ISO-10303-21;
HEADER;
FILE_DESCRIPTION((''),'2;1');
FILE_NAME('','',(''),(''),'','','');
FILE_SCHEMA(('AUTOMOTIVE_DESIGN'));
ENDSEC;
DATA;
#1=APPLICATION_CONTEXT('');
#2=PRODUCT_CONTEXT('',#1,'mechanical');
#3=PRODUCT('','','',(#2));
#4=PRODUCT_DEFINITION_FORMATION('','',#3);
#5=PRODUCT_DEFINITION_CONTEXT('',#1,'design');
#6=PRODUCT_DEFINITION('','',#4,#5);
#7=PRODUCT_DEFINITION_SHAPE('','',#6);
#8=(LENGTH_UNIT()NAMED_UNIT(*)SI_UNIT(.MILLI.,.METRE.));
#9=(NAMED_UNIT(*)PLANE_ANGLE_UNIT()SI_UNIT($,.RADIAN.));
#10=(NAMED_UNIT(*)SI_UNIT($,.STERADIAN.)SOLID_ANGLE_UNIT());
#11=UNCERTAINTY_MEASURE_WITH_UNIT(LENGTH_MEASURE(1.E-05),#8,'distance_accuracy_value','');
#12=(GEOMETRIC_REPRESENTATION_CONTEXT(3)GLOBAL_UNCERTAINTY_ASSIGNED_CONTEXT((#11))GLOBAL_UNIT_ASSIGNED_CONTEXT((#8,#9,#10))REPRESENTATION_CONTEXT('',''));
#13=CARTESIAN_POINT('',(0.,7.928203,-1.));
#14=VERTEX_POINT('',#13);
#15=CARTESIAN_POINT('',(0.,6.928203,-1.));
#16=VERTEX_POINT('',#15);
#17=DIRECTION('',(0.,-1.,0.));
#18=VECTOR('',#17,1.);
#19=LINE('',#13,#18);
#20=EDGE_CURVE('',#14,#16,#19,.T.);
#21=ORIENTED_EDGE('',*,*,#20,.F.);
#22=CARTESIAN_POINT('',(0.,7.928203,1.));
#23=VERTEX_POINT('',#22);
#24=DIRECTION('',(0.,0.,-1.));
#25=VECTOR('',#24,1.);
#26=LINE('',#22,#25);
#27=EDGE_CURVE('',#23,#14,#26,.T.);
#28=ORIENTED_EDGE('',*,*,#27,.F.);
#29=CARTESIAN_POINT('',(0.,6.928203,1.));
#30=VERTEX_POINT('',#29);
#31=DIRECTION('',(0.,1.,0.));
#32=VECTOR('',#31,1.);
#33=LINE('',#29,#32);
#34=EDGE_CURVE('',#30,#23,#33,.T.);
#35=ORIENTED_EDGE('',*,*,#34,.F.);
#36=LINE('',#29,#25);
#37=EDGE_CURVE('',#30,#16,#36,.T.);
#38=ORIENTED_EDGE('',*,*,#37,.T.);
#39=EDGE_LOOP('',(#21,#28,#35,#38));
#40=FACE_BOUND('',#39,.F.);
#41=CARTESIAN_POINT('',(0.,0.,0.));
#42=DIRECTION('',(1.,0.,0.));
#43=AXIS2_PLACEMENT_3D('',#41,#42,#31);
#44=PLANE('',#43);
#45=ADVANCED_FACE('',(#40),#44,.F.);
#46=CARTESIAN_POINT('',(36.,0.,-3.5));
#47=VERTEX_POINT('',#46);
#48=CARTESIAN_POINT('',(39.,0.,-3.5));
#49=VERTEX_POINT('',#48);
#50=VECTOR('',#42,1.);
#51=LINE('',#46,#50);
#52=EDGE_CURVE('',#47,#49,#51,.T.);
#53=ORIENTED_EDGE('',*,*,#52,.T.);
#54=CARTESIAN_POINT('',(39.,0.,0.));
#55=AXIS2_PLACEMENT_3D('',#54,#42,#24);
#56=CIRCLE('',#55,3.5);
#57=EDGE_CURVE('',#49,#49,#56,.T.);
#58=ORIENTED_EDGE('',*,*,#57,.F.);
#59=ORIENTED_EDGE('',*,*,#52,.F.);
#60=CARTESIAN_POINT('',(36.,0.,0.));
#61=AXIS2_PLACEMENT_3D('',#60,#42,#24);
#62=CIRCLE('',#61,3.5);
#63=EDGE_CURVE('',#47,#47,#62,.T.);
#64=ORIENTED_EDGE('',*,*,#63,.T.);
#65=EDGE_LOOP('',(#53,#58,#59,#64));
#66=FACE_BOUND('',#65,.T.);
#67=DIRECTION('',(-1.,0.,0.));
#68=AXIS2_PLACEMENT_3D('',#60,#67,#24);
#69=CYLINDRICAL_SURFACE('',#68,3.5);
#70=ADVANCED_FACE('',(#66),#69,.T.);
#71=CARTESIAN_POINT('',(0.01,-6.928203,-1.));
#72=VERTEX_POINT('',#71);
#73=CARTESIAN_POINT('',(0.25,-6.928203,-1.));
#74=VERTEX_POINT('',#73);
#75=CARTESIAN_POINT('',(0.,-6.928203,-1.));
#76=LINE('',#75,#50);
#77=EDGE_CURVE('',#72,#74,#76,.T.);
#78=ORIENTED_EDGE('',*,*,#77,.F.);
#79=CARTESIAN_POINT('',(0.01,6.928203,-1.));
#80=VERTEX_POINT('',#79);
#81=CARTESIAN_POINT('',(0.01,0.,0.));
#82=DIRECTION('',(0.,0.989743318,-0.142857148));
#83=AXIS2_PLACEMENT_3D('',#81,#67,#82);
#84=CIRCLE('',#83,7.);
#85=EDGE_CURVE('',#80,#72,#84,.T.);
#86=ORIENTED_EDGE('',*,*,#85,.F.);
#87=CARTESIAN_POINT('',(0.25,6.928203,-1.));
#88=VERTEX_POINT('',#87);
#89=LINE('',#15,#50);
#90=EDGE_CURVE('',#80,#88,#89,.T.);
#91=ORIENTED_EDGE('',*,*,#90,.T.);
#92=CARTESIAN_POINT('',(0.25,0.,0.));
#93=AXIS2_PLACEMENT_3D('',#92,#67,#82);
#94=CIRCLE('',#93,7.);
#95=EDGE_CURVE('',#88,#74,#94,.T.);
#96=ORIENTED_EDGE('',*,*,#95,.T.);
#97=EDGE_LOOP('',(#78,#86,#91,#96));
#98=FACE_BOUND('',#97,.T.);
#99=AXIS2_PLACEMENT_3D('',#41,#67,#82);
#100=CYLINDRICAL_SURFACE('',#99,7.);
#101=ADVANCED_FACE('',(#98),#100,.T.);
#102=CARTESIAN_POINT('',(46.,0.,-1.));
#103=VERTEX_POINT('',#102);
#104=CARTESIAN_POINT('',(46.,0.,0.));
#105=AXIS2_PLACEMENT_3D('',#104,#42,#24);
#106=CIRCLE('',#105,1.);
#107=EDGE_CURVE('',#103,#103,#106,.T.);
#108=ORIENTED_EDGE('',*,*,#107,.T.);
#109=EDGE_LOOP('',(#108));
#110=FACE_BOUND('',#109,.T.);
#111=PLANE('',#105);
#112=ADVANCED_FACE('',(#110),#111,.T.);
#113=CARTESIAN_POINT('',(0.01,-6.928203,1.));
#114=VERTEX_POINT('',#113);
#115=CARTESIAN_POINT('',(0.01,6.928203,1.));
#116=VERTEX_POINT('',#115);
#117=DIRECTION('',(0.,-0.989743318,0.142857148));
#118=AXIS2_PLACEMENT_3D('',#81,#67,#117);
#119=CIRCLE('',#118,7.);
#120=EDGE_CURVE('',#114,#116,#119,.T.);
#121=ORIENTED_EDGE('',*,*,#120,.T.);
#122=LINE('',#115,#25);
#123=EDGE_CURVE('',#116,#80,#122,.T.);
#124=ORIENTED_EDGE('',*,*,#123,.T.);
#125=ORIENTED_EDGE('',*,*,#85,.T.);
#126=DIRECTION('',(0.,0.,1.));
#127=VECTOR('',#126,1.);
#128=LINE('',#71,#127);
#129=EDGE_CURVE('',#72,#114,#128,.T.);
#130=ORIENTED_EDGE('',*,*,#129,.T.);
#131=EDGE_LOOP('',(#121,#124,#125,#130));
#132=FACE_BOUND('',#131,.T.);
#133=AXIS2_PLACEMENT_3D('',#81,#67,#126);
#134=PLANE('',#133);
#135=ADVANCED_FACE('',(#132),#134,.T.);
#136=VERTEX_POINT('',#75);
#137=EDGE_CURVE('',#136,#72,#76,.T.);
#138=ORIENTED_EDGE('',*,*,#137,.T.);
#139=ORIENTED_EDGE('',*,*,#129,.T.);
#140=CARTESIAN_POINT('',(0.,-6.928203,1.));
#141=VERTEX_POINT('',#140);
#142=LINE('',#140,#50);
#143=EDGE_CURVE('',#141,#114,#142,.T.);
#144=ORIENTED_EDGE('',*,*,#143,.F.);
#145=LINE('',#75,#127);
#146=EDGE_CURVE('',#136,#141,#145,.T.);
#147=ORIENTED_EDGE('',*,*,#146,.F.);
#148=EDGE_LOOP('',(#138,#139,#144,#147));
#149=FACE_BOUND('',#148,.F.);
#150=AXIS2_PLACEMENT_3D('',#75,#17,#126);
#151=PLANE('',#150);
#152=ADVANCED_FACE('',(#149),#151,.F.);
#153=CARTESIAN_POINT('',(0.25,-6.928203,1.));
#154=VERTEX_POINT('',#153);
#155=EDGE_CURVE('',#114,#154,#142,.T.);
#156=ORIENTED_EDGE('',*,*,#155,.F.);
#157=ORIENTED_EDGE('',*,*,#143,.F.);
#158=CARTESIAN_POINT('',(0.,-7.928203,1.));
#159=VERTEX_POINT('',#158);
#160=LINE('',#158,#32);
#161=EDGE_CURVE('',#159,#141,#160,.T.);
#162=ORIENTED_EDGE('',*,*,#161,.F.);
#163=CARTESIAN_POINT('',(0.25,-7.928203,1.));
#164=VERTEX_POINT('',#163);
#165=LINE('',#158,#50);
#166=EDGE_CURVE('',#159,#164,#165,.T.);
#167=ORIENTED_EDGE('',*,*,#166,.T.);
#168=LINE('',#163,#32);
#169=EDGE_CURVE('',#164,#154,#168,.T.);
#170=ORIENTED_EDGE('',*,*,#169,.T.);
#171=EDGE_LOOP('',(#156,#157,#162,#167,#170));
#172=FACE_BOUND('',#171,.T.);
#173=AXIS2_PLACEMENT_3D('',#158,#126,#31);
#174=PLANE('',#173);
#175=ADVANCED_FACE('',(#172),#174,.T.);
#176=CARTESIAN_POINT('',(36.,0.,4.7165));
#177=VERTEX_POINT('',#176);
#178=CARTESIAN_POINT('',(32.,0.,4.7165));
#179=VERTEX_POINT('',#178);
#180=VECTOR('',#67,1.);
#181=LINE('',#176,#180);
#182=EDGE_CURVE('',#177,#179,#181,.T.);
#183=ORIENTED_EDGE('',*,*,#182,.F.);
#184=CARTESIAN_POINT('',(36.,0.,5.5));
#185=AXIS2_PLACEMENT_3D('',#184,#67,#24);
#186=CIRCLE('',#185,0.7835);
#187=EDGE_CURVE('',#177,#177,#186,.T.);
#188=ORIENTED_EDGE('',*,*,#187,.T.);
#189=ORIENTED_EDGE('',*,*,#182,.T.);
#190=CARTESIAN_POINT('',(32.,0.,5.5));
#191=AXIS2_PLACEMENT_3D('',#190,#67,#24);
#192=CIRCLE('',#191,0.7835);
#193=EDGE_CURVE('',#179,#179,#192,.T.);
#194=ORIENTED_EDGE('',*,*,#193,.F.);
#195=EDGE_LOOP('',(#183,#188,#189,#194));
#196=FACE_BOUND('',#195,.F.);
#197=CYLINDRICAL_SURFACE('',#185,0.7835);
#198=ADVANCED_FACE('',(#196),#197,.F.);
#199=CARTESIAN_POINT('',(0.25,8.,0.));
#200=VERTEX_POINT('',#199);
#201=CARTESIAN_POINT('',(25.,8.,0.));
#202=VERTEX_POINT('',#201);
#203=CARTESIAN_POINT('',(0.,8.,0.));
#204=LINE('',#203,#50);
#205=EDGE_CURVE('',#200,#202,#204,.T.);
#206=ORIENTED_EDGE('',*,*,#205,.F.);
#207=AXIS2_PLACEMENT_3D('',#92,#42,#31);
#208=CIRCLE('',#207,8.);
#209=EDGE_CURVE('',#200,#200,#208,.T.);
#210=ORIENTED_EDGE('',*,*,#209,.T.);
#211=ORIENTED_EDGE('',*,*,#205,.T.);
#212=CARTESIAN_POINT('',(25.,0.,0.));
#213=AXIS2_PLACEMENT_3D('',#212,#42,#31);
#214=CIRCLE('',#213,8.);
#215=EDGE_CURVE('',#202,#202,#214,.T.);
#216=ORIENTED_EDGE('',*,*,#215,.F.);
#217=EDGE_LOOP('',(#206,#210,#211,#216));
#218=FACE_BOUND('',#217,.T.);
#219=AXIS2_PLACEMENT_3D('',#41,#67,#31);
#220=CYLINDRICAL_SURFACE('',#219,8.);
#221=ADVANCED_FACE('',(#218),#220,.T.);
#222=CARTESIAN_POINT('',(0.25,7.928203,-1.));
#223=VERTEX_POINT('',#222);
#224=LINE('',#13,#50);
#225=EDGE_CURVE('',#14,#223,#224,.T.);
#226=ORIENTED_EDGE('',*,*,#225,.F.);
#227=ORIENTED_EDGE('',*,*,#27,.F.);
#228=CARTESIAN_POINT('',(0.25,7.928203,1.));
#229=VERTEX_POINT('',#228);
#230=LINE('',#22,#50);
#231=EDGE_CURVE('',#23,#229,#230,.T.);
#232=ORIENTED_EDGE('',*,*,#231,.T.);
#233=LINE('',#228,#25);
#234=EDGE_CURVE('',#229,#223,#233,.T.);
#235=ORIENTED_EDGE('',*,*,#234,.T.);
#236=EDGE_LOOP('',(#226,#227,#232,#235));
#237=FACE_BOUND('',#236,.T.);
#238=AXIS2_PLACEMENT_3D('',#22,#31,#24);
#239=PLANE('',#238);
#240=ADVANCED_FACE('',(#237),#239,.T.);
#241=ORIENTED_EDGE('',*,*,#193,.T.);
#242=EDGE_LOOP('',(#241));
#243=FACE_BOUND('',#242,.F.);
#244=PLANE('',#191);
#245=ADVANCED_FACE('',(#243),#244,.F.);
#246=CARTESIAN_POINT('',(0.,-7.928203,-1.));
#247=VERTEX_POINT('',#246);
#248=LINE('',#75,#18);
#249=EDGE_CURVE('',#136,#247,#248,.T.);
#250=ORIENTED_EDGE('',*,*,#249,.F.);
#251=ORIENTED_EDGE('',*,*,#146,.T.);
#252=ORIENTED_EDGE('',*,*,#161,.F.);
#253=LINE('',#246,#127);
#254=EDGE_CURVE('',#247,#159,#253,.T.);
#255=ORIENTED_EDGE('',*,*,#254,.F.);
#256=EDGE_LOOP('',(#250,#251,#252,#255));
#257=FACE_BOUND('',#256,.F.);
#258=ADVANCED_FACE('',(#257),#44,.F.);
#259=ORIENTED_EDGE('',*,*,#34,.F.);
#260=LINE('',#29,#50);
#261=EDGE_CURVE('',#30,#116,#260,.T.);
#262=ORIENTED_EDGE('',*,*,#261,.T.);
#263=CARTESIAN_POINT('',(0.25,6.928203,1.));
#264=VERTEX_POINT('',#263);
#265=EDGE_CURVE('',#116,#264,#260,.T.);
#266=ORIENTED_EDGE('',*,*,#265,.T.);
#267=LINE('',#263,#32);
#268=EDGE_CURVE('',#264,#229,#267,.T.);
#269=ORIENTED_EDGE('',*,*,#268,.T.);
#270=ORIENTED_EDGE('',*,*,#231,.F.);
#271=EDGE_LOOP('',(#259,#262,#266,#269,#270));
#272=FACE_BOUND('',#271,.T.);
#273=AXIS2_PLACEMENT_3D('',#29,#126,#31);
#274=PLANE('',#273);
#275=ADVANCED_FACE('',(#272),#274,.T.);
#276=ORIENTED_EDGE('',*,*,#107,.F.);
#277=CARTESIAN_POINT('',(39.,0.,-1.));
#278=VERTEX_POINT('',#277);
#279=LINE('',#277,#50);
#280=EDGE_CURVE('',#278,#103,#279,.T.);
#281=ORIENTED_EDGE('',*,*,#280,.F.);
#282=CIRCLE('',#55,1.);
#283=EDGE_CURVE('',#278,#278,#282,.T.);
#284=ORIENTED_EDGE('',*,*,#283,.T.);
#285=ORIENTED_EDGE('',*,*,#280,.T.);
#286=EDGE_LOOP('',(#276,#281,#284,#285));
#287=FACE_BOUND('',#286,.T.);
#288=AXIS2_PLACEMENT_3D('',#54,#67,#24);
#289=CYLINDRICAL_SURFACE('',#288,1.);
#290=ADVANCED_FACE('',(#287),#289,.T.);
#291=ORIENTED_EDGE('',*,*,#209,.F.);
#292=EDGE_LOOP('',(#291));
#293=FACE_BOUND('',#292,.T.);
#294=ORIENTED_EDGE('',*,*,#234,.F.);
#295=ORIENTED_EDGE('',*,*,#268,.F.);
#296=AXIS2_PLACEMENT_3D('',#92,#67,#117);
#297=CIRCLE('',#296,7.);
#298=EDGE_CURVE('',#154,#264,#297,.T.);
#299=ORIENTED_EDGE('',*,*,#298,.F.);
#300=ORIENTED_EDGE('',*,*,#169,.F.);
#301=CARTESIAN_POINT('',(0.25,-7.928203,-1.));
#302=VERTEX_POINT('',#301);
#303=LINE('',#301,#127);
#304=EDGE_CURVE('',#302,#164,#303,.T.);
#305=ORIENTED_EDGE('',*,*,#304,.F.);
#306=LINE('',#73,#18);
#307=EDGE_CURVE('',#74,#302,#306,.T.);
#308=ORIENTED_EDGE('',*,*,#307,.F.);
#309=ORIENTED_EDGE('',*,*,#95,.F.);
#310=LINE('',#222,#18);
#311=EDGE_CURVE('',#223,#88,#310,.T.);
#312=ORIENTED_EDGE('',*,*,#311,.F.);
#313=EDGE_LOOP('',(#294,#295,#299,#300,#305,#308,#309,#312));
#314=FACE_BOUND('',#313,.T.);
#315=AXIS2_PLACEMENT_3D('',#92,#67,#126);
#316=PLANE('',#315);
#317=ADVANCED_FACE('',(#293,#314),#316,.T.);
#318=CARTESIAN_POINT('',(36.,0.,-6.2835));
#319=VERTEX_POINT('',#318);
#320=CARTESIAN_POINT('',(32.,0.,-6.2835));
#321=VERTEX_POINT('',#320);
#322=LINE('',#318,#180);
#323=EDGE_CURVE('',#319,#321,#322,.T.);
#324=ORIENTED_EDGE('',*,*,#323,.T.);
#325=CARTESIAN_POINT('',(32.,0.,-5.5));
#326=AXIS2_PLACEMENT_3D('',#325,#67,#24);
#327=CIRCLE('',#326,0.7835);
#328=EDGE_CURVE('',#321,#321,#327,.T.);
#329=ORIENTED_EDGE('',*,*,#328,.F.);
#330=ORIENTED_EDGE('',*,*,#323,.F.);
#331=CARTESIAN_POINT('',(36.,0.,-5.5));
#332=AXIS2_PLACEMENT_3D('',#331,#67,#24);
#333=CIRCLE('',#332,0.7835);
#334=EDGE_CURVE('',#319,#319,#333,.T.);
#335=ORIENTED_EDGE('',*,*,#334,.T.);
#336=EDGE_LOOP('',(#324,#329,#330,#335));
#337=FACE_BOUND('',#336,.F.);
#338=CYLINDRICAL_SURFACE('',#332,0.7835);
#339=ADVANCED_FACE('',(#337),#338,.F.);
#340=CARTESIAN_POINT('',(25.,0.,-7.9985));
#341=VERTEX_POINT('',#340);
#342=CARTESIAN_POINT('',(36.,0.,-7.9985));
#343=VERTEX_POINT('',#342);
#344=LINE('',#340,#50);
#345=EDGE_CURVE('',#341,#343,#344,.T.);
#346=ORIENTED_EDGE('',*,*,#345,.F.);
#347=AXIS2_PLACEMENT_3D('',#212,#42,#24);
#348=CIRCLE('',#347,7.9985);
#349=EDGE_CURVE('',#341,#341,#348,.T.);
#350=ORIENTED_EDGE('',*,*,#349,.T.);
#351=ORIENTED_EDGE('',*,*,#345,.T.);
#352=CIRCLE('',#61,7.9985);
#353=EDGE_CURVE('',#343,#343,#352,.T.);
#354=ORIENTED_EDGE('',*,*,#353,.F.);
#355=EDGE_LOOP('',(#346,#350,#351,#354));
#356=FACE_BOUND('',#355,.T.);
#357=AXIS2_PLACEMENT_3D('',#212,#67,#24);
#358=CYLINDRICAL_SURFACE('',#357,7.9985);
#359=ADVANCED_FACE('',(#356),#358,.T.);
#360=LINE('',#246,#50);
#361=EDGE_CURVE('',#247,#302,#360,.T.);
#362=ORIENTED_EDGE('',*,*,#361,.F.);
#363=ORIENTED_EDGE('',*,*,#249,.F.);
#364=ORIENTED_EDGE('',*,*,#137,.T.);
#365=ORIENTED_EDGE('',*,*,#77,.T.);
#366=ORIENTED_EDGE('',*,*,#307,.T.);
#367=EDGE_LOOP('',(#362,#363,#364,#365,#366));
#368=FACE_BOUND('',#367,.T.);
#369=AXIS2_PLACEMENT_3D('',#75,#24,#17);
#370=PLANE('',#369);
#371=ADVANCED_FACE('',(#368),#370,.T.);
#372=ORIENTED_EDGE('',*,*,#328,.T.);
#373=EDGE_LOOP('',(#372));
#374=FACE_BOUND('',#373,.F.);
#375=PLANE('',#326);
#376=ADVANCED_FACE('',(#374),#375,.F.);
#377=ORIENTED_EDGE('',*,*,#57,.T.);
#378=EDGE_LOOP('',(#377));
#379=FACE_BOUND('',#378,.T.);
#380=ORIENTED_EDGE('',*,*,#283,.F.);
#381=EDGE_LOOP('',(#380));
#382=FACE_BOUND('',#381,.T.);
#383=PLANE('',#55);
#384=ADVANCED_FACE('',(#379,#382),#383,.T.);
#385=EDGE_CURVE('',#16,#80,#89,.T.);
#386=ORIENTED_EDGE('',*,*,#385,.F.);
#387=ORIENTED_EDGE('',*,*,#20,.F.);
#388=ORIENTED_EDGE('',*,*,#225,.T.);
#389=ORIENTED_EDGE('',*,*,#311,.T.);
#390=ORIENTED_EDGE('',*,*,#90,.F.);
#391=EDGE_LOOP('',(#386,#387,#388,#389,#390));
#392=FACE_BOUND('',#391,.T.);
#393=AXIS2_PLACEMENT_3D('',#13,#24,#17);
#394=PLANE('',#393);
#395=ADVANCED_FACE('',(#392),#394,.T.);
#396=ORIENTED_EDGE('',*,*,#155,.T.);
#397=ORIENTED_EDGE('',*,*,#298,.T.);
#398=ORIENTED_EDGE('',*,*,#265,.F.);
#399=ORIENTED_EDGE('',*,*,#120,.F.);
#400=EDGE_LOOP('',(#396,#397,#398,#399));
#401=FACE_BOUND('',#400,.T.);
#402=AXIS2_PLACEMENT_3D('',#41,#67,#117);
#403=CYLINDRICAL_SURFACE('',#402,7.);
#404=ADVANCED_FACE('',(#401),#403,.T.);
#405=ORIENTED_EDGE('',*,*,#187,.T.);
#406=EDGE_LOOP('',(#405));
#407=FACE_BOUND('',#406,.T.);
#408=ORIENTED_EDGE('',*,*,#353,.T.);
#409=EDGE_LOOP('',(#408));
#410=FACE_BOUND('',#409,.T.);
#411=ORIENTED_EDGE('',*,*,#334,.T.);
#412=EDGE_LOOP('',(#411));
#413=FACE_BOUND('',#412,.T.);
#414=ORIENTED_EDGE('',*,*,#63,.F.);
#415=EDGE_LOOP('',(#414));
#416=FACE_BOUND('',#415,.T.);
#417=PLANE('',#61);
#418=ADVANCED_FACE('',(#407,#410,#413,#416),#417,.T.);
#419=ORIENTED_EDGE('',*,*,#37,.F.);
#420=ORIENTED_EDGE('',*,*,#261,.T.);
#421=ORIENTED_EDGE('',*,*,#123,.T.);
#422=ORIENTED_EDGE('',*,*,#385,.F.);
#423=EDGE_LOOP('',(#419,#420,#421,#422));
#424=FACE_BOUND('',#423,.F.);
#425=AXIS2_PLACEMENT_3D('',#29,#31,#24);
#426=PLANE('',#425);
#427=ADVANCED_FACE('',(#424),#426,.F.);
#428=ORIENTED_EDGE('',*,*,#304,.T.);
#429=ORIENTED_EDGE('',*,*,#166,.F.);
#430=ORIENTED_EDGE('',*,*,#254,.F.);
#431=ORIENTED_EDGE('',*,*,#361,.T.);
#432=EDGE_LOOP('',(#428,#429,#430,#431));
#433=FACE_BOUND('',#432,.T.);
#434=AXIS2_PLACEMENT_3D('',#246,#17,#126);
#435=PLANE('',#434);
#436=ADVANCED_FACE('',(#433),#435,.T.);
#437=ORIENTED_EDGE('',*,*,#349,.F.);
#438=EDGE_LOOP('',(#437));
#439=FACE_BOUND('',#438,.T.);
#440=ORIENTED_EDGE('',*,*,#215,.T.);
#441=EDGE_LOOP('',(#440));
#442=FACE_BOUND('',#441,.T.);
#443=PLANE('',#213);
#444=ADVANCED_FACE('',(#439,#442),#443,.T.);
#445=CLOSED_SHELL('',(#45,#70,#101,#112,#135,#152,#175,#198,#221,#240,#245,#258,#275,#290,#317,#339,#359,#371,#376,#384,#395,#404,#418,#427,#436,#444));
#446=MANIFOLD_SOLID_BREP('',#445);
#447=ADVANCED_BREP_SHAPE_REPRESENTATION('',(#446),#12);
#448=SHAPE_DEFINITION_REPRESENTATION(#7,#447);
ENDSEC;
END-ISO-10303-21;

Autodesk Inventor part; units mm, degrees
ref_plane "YZ Plane" through (0, 0, 0) normal (1, 0, 0) x (0, 1, 0)
ref_plane "XZ Plane" through (0, 0, 0) normal (0, 1, 0) x (-1, 0, 0)
ref_plane "XY Plane" through (0, 0, 0) normal (0, 0, 1) x (1, 0, 0)
sketch "Sketch1" plane through (0, 0, 0) normal (1, 0, 0) x (0, 1, 0)
  circle A0 centre (0, 0) radius 8
  dimension "d0" = 16
sketch "Sketch1 outline for Extrusion1" plane through (0, 0, 0) normal (1, 0, 0) x (0, 1, 0)
  circle A0 centre (0, 0) radius 8
extrude "Extrusion1" add sketch "Sketch1 outline for Extrusion1" along normal blind 25
sketch "Sketch2" plane through (25, 0, 0) normal (1, 0, 0) x (0, 0, -1)
  circle A0 centre (0, 0) radius 8 projected
  circle A1 centre (0, 0) radius 7.9985
  dimension "d20" = 15.997
sketch "Sketch2 outline for Extrusion2" plane through (25, 0, 0) normal (1, 0, 0) x (0, 0, -1)
  circle A0 centre (0, 0) radius 7.9985
extrude "Extrusion2" add sketch "Sketch2 outline for Extrusion2" along normal blind 11
sketch "Sketch3" plane through (36, 0, 0) normal (1, 0, 0) x (0, 0, -1)
  circle A0 centre (0, 0) radius 8 construction
  line L0 (-8, 0) -> (8, 0) construction
  circle A1 centre (0, 0) radius 5.5 construction
  point P0 (-5.5, 0)
  point P1 (5.5, 0)
  dimension "d6" = 11
hole "Hole1" at (36, 0, 5.5) at (36, 0, -5.5) direction (-1, 0, 0) diameter 1.567 depth 4 thread size "M2x0.4" class "6H" standard "ANSI Metric M Profile"
sketch "Sketch4" plane through (36, 0, 0) normal (1, 0, 0) x (0, 0, -1)
  circle A0 centre (-5.5, 0) radius 0.7835 projected
  circle A1 centre (5.5, 0) radius 0.7835 projected
  circle A2 centre (0, 0) radius 3.5
  dimension "d14" = 7
sketch "Sketch4 outline for Extrusion3" plane through (36, 0, 0) normal (1, 0, 0) x (0, 0, -1)
  circle A0 centre (0, 0) radius 3.5
extrude "Extrusion3" add sketch "Sketch4 outline for Extrusion3" along normal blind 3
sketch "Sketch5" plane through (39, 0, 0) normal (1, 0, 0) x (0, 0, -1)
  circle A0 centre (0, 0) radius 1
  dimension "d17" = 2
sketch "Sketch5 outline for Extrusion4" plane through (39, 0, 0) normal (1, 0, 0) x (0, 0, -1)
  circle A0 centre (0, 0) radius 1
extrude "Extrusion4" add sketch "Sketch5 outline for Extrusion4" along normal blind 7
sketch "Sketch6" plane through (0, 0, 0) normal (-1, 0, 0) x (0, 0, 1)
  circle A0 centre (0, 0) radius 7
  circle A1 centre (0, 0) radius 8
  line L0 (1, 6.928203) -> (-1, 6.928203)
  line L1 (-1, 6.928203) -> (-1, 7.928203)
  line L2 (-1, 7.928203) -> (1, 7.928203)
  line L3 (1, 7.928203) -> (1, 6.928203)
  line L4 (1, -6.928203) -> (-1, -6.928203)
  line L5 (-1, -6.928203) -> (-1, -7.928203)
  line L6 (-1, -7.928203) -> (1, -7.928203)
  line L7 (1, -7.928203) -> (1, -6.928203)
  dimension "d21" = 1
  dimension "d22" = 2
  dimension "d23" = 1
sketch "Sketch6 outline for Extrusion5" plane through (0, 0, 0) normal (-1, 0, 0) x (0, 0, 1)
  circle A0 centre (0, 0) radius 8
  arc A1 (-1, 6.928203) -> (-1, -6.928203) centre (0, 0) ccw
  line L0 (-1, -6.928203) -> (-1, -7.928203)
  line L1 (-1, -7.928203) -> (1, -7.928203)
  line L2 (1, -7.928203) -> (1, -6.928203)
  arc A2 (1, -6.928203) -> (1, 6.928203) centre (0, 0) ccw
  line L3 (1, 6.928203) -> (1, 7.928203)
  line L4 (1, 7.928203) -> (-1, 7.928203)
  line L5 (-1, 7.928203) -> (-1, 6.928203)
extrude "Extrusion5" cut sketch "Sketch6 outline for Extrusion5" against normal blind 0.25
sketch "Sketch6 outline for Extrusion6" plane through (0, 0, 0) normal (-1, 0, 0) x (0, 0, 1)
  arc A0 (1, -6.928203) -> (1, 6.928203) centre (0, 0) ccw
  line L0 (-1, -6.928203) -> (1, -6.928203)
  arc A1 (-1, 6.928203) -> (-1, -6.928203) centre (0, 0) ccw
  line L1 (1, 6.928203) -> (-1, 6.928203)
extrude "Extrusion6" cut sketch "Sketch6 outline for Extrusion6" against normal blind 0.01
properties part number "MotorNM" material "Steel, Galvanized"
